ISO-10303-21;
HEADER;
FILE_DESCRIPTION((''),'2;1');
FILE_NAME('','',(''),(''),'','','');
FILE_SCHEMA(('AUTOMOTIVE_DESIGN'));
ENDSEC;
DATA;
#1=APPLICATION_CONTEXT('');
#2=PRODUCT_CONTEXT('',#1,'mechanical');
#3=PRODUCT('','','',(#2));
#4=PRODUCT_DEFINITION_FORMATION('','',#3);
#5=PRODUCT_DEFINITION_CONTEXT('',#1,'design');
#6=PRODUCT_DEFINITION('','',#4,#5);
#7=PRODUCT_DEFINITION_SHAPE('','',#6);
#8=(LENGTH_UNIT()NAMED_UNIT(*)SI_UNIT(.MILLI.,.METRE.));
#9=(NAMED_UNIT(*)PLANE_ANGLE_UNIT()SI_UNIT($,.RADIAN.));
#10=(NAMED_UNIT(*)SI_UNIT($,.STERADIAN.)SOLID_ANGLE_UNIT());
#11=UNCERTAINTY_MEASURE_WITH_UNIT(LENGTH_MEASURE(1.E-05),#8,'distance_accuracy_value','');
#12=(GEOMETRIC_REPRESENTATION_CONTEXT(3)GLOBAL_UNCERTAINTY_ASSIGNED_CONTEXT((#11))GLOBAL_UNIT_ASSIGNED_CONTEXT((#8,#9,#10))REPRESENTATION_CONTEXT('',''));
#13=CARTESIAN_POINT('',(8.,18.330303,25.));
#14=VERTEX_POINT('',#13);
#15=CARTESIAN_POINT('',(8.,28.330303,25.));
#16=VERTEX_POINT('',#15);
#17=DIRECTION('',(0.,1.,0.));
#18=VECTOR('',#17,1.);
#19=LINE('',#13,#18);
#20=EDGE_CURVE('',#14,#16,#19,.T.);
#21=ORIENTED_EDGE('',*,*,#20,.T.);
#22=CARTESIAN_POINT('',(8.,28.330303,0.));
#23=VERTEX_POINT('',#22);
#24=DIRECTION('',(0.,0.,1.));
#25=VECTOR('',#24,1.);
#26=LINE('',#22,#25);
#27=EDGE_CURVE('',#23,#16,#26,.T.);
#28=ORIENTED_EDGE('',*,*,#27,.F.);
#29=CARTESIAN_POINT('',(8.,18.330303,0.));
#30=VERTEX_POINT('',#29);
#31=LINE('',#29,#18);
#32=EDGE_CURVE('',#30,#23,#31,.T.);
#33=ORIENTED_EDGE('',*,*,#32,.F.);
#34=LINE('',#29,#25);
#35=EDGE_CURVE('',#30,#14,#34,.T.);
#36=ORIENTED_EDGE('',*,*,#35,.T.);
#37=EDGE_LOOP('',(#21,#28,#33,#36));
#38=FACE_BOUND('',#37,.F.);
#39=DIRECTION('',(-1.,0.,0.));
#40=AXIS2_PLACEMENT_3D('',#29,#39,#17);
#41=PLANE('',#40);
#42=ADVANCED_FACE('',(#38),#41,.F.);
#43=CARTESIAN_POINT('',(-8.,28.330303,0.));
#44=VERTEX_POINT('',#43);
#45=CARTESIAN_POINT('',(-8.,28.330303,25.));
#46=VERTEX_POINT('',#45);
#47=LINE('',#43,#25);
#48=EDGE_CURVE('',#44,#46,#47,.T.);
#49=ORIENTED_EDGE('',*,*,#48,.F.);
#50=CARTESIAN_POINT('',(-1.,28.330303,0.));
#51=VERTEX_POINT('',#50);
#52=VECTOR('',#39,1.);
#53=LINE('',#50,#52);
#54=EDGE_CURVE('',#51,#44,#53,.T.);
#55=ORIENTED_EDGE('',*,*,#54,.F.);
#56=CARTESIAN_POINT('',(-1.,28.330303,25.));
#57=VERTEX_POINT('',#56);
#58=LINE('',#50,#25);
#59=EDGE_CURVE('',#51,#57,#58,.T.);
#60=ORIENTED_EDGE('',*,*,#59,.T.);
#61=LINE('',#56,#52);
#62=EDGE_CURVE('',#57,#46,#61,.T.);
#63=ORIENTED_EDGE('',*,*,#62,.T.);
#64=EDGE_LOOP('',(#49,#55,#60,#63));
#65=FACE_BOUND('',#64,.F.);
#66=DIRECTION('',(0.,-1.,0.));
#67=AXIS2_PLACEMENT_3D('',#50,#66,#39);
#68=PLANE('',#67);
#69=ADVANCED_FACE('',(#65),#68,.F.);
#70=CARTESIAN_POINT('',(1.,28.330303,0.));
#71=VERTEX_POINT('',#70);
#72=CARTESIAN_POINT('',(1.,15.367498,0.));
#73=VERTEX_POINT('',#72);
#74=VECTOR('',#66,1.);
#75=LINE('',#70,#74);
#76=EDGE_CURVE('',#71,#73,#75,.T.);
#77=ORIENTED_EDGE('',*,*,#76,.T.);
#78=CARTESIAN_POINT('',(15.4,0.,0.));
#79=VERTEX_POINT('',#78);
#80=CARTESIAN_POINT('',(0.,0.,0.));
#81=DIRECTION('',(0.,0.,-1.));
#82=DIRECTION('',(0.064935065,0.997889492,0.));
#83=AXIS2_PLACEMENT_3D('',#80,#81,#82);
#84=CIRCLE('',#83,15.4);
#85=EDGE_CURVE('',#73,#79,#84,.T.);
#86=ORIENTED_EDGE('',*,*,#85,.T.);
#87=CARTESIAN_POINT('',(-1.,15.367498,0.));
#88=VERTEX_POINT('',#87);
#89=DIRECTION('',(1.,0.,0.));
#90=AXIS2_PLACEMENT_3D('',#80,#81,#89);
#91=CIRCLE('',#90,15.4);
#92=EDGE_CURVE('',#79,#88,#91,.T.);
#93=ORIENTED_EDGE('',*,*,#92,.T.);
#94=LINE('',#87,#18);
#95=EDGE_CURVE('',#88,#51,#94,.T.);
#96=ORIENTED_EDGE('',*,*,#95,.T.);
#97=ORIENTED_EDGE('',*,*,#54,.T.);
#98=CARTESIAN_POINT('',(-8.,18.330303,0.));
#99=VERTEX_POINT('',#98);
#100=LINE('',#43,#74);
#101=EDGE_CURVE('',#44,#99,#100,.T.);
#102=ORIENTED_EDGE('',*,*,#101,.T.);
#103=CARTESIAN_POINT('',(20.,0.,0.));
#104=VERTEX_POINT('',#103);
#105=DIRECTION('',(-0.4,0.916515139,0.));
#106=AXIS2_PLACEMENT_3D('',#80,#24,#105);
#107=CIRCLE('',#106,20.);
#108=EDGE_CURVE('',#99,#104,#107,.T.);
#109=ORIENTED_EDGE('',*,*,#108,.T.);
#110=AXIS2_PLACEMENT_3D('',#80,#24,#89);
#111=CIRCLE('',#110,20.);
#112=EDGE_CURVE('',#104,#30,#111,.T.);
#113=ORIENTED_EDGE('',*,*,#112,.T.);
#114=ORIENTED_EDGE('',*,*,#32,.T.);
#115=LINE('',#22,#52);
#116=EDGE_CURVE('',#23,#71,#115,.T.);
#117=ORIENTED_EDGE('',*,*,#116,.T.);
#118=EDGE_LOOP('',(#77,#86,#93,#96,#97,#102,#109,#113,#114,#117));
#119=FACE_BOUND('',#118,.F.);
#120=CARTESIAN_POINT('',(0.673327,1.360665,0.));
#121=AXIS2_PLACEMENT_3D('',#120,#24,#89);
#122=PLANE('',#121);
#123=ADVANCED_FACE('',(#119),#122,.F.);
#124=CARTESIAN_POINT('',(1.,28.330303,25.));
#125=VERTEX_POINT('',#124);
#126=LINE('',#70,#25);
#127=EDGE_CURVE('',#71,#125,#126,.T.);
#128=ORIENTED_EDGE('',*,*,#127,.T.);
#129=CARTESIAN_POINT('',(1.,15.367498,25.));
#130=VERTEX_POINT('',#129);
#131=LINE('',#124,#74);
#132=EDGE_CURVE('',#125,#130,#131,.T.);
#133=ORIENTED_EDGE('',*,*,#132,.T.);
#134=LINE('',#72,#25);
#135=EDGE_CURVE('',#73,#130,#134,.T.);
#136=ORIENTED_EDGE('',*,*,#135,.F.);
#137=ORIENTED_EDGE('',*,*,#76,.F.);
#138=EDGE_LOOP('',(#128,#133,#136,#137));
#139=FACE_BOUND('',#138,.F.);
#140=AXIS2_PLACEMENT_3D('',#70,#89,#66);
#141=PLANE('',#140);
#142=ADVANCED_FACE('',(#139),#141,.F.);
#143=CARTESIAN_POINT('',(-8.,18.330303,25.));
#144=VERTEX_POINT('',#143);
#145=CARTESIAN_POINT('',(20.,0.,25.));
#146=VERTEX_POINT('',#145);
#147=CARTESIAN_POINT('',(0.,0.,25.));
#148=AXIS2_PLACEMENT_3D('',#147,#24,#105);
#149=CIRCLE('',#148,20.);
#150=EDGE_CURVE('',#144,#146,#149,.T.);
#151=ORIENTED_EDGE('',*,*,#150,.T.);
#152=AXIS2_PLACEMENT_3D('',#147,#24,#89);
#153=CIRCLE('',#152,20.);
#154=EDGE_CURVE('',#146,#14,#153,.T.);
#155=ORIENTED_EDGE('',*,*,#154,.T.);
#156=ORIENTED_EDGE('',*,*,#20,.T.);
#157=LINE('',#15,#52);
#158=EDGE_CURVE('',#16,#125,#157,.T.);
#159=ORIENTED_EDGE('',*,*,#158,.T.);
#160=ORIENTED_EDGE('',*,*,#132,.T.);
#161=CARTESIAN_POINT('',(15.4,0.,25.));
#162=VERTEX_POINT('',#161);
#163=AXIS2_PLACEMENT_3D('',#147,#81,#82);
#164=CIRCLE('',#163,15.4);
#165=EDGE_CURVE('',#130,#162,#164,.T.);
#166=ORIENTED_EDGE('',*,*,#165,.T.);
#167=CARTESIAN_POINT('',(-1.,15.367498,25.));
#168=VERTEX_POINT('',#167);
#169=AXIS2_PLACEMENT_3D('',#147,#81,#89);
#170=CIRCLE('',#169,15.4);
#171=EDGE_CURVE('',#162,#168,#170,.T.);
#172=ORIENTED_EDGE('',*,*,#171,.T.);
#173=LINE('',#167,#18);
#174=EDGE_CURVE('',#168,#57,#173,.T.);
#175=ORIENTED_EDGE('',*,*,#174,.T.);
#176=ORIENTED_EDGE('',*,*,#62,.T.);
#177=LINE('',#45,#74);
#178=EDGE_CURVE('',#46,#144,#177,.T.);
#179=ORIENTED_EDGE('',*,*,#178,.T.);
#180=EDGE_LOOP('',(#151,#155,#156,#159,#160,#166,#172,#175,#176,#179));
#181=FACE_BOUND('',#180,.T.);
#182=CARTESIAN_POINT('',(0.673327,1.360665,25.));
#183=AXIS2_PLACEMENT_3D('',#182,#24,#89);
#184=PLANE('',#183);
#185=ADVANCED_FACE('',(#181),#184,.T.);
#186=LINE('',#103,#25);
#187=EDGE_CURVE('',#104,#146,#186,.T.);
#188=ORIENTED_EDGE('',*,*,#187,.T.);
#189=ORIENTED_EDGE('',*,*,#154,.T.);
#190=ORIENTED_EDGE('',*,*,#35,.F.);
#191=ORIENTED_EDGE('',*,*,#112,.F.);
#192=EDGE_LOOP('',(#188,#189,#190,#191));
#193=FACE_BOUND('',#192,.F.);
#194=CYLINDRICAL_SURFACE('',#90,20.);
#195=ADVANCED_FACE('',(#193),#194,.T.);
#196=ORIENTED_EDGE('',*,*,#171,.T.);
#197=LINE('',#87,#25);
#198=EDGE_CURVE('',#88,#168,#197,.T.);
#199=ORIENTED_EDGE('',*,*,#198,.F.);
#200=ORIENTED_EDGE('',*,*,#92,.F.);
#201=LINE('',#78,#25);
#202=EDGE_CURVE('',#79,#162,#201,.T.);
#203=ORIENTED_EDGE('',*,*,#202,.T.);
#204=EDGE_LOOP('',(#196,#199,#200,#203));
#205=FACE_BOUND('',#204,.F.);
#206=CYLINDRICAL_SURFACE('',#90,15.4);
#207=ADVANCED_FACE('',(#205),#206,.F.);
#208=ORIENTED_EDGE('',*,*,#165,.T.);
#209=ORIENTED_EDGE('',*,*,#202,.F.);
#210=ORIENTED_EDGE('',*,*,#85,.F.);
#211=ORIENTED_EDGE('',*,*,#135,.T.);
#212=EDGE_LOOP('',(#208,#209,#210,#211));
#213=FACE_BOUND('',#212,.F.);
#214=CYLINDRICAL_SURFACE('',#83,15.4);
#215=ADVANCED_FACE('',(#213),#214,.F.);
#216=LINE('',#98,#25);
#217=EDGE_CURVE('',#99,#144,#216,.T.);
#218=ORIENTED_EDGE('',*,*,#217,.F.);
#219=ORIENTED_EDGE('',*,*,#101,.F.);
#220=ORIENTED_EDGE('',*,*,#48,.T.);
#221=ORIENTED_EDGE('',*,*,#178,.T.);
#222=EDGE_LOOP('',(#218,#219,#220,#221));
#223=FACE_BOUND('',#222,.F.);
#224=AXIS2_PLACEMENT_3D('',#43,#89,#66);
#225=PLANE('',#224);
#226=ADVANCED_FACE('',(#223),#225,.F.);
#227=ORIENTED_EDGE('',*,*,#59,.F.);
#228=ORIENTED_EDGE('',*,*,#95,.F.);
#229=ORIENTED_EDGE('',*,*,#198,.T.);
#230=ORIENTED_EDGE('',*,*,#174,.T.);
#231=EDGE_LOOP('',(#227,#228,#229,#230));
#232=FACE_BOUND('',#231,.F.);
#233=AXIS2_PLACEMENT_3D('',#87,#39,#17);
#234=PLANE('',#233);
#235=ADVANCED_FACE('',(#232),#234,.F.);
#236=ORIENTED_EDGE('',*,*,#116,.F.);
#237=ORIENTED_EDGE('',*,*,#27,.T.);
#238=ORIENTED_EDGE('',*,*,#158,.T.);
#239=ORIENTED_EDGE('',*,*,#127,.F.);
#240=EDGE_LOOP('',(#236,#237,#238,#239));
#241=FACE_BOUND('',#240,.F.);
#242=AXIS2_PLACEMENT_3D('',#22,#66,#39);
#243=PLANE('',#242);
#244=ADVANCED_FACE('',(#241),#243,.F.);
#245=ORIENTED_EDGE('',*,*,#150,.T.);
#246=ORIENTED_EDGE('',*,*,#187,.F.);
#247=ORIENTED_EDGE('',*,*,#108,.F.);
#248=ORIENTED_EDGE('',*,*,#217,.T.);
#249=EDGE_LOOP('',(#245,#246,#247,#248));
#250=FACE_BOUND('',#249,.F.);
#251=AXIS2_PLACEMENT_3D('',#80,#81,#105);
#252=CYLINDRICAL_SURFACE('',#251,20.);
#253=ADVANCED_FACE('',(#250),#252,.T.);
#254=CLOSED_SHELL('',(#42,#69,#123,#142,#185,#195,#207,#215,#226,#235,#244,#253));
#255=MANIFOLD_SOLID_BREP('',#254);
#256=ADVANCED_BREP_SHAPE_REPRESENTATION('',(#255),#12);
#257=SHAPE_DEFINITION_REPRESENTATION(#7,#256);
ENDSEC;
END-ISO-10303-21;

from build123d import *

# Parameters (mm, degrees)
F1_DEPTH = 25


# Not quite as in the source:
# - a feature names something its author has since deleted; it is built from what else it names


with BuildPart() as f1:
    # F0 (on Top) → F1 (new body)
    with BuildSketch(Plane.XY):
        with BuildLine():
            ThreePointArc((1, 15.3674981698), (11.2374374303, 10.5299572649), (15.4, 0))
            ThreePointArc((15.4, 0), (-10.5299572649, -11.2374374303), (-1, 15.3674981698))
            Line((-1, 15.3674981698), (-1, 19.9749843554))
            ThreePointArc((-1, 19.9749843554), (-4.5745212177, 19.4698165279), (-8, 18.3303027798))
            ThreePointArc((-8, 18.3303027798), (-10.9544511501, -16.7332005307), (20, 0))
            ThreePointArc((20, 0), (16.7332005307, 10.9544511501), (8, 18.3303027798))
            ThreePointArc((8, 18.3303027798), (4.5745212177, 19.4698165279), (1, 19.9749843554))
            Line((1, 19.9749843554), (1, 15.3674981698))
        make_face()
        with BuildLine():
            Line((1, 28.3303027798), (1, 19.9749843554))
            ThreePointArc((1, 19.9749843554), (4.5745212177, 19.4698165279), (8, 18.3303027798))
            Line((8, 18.3303027798), (8, 28.3303027798))
            Line((8, 28.3303027798), (1, 28.3303027798))
        make_face()
        with BuildLine():
            ThreePointArc((-8, 18.3303027798), (-4.5745212177, 19.4698165279), (-1, 19.9749843554))
            Line((-1, 19.9749843554), (-1, 28.3303027798))
            Line((-1, 28.3303027798), (-8, 28.3303027798))
            Line((-8, 28.3303027798), (-8, 18.3303027798))
        make_face()
    extrude(amount=F1_DEPTH)


solid = f1.part
